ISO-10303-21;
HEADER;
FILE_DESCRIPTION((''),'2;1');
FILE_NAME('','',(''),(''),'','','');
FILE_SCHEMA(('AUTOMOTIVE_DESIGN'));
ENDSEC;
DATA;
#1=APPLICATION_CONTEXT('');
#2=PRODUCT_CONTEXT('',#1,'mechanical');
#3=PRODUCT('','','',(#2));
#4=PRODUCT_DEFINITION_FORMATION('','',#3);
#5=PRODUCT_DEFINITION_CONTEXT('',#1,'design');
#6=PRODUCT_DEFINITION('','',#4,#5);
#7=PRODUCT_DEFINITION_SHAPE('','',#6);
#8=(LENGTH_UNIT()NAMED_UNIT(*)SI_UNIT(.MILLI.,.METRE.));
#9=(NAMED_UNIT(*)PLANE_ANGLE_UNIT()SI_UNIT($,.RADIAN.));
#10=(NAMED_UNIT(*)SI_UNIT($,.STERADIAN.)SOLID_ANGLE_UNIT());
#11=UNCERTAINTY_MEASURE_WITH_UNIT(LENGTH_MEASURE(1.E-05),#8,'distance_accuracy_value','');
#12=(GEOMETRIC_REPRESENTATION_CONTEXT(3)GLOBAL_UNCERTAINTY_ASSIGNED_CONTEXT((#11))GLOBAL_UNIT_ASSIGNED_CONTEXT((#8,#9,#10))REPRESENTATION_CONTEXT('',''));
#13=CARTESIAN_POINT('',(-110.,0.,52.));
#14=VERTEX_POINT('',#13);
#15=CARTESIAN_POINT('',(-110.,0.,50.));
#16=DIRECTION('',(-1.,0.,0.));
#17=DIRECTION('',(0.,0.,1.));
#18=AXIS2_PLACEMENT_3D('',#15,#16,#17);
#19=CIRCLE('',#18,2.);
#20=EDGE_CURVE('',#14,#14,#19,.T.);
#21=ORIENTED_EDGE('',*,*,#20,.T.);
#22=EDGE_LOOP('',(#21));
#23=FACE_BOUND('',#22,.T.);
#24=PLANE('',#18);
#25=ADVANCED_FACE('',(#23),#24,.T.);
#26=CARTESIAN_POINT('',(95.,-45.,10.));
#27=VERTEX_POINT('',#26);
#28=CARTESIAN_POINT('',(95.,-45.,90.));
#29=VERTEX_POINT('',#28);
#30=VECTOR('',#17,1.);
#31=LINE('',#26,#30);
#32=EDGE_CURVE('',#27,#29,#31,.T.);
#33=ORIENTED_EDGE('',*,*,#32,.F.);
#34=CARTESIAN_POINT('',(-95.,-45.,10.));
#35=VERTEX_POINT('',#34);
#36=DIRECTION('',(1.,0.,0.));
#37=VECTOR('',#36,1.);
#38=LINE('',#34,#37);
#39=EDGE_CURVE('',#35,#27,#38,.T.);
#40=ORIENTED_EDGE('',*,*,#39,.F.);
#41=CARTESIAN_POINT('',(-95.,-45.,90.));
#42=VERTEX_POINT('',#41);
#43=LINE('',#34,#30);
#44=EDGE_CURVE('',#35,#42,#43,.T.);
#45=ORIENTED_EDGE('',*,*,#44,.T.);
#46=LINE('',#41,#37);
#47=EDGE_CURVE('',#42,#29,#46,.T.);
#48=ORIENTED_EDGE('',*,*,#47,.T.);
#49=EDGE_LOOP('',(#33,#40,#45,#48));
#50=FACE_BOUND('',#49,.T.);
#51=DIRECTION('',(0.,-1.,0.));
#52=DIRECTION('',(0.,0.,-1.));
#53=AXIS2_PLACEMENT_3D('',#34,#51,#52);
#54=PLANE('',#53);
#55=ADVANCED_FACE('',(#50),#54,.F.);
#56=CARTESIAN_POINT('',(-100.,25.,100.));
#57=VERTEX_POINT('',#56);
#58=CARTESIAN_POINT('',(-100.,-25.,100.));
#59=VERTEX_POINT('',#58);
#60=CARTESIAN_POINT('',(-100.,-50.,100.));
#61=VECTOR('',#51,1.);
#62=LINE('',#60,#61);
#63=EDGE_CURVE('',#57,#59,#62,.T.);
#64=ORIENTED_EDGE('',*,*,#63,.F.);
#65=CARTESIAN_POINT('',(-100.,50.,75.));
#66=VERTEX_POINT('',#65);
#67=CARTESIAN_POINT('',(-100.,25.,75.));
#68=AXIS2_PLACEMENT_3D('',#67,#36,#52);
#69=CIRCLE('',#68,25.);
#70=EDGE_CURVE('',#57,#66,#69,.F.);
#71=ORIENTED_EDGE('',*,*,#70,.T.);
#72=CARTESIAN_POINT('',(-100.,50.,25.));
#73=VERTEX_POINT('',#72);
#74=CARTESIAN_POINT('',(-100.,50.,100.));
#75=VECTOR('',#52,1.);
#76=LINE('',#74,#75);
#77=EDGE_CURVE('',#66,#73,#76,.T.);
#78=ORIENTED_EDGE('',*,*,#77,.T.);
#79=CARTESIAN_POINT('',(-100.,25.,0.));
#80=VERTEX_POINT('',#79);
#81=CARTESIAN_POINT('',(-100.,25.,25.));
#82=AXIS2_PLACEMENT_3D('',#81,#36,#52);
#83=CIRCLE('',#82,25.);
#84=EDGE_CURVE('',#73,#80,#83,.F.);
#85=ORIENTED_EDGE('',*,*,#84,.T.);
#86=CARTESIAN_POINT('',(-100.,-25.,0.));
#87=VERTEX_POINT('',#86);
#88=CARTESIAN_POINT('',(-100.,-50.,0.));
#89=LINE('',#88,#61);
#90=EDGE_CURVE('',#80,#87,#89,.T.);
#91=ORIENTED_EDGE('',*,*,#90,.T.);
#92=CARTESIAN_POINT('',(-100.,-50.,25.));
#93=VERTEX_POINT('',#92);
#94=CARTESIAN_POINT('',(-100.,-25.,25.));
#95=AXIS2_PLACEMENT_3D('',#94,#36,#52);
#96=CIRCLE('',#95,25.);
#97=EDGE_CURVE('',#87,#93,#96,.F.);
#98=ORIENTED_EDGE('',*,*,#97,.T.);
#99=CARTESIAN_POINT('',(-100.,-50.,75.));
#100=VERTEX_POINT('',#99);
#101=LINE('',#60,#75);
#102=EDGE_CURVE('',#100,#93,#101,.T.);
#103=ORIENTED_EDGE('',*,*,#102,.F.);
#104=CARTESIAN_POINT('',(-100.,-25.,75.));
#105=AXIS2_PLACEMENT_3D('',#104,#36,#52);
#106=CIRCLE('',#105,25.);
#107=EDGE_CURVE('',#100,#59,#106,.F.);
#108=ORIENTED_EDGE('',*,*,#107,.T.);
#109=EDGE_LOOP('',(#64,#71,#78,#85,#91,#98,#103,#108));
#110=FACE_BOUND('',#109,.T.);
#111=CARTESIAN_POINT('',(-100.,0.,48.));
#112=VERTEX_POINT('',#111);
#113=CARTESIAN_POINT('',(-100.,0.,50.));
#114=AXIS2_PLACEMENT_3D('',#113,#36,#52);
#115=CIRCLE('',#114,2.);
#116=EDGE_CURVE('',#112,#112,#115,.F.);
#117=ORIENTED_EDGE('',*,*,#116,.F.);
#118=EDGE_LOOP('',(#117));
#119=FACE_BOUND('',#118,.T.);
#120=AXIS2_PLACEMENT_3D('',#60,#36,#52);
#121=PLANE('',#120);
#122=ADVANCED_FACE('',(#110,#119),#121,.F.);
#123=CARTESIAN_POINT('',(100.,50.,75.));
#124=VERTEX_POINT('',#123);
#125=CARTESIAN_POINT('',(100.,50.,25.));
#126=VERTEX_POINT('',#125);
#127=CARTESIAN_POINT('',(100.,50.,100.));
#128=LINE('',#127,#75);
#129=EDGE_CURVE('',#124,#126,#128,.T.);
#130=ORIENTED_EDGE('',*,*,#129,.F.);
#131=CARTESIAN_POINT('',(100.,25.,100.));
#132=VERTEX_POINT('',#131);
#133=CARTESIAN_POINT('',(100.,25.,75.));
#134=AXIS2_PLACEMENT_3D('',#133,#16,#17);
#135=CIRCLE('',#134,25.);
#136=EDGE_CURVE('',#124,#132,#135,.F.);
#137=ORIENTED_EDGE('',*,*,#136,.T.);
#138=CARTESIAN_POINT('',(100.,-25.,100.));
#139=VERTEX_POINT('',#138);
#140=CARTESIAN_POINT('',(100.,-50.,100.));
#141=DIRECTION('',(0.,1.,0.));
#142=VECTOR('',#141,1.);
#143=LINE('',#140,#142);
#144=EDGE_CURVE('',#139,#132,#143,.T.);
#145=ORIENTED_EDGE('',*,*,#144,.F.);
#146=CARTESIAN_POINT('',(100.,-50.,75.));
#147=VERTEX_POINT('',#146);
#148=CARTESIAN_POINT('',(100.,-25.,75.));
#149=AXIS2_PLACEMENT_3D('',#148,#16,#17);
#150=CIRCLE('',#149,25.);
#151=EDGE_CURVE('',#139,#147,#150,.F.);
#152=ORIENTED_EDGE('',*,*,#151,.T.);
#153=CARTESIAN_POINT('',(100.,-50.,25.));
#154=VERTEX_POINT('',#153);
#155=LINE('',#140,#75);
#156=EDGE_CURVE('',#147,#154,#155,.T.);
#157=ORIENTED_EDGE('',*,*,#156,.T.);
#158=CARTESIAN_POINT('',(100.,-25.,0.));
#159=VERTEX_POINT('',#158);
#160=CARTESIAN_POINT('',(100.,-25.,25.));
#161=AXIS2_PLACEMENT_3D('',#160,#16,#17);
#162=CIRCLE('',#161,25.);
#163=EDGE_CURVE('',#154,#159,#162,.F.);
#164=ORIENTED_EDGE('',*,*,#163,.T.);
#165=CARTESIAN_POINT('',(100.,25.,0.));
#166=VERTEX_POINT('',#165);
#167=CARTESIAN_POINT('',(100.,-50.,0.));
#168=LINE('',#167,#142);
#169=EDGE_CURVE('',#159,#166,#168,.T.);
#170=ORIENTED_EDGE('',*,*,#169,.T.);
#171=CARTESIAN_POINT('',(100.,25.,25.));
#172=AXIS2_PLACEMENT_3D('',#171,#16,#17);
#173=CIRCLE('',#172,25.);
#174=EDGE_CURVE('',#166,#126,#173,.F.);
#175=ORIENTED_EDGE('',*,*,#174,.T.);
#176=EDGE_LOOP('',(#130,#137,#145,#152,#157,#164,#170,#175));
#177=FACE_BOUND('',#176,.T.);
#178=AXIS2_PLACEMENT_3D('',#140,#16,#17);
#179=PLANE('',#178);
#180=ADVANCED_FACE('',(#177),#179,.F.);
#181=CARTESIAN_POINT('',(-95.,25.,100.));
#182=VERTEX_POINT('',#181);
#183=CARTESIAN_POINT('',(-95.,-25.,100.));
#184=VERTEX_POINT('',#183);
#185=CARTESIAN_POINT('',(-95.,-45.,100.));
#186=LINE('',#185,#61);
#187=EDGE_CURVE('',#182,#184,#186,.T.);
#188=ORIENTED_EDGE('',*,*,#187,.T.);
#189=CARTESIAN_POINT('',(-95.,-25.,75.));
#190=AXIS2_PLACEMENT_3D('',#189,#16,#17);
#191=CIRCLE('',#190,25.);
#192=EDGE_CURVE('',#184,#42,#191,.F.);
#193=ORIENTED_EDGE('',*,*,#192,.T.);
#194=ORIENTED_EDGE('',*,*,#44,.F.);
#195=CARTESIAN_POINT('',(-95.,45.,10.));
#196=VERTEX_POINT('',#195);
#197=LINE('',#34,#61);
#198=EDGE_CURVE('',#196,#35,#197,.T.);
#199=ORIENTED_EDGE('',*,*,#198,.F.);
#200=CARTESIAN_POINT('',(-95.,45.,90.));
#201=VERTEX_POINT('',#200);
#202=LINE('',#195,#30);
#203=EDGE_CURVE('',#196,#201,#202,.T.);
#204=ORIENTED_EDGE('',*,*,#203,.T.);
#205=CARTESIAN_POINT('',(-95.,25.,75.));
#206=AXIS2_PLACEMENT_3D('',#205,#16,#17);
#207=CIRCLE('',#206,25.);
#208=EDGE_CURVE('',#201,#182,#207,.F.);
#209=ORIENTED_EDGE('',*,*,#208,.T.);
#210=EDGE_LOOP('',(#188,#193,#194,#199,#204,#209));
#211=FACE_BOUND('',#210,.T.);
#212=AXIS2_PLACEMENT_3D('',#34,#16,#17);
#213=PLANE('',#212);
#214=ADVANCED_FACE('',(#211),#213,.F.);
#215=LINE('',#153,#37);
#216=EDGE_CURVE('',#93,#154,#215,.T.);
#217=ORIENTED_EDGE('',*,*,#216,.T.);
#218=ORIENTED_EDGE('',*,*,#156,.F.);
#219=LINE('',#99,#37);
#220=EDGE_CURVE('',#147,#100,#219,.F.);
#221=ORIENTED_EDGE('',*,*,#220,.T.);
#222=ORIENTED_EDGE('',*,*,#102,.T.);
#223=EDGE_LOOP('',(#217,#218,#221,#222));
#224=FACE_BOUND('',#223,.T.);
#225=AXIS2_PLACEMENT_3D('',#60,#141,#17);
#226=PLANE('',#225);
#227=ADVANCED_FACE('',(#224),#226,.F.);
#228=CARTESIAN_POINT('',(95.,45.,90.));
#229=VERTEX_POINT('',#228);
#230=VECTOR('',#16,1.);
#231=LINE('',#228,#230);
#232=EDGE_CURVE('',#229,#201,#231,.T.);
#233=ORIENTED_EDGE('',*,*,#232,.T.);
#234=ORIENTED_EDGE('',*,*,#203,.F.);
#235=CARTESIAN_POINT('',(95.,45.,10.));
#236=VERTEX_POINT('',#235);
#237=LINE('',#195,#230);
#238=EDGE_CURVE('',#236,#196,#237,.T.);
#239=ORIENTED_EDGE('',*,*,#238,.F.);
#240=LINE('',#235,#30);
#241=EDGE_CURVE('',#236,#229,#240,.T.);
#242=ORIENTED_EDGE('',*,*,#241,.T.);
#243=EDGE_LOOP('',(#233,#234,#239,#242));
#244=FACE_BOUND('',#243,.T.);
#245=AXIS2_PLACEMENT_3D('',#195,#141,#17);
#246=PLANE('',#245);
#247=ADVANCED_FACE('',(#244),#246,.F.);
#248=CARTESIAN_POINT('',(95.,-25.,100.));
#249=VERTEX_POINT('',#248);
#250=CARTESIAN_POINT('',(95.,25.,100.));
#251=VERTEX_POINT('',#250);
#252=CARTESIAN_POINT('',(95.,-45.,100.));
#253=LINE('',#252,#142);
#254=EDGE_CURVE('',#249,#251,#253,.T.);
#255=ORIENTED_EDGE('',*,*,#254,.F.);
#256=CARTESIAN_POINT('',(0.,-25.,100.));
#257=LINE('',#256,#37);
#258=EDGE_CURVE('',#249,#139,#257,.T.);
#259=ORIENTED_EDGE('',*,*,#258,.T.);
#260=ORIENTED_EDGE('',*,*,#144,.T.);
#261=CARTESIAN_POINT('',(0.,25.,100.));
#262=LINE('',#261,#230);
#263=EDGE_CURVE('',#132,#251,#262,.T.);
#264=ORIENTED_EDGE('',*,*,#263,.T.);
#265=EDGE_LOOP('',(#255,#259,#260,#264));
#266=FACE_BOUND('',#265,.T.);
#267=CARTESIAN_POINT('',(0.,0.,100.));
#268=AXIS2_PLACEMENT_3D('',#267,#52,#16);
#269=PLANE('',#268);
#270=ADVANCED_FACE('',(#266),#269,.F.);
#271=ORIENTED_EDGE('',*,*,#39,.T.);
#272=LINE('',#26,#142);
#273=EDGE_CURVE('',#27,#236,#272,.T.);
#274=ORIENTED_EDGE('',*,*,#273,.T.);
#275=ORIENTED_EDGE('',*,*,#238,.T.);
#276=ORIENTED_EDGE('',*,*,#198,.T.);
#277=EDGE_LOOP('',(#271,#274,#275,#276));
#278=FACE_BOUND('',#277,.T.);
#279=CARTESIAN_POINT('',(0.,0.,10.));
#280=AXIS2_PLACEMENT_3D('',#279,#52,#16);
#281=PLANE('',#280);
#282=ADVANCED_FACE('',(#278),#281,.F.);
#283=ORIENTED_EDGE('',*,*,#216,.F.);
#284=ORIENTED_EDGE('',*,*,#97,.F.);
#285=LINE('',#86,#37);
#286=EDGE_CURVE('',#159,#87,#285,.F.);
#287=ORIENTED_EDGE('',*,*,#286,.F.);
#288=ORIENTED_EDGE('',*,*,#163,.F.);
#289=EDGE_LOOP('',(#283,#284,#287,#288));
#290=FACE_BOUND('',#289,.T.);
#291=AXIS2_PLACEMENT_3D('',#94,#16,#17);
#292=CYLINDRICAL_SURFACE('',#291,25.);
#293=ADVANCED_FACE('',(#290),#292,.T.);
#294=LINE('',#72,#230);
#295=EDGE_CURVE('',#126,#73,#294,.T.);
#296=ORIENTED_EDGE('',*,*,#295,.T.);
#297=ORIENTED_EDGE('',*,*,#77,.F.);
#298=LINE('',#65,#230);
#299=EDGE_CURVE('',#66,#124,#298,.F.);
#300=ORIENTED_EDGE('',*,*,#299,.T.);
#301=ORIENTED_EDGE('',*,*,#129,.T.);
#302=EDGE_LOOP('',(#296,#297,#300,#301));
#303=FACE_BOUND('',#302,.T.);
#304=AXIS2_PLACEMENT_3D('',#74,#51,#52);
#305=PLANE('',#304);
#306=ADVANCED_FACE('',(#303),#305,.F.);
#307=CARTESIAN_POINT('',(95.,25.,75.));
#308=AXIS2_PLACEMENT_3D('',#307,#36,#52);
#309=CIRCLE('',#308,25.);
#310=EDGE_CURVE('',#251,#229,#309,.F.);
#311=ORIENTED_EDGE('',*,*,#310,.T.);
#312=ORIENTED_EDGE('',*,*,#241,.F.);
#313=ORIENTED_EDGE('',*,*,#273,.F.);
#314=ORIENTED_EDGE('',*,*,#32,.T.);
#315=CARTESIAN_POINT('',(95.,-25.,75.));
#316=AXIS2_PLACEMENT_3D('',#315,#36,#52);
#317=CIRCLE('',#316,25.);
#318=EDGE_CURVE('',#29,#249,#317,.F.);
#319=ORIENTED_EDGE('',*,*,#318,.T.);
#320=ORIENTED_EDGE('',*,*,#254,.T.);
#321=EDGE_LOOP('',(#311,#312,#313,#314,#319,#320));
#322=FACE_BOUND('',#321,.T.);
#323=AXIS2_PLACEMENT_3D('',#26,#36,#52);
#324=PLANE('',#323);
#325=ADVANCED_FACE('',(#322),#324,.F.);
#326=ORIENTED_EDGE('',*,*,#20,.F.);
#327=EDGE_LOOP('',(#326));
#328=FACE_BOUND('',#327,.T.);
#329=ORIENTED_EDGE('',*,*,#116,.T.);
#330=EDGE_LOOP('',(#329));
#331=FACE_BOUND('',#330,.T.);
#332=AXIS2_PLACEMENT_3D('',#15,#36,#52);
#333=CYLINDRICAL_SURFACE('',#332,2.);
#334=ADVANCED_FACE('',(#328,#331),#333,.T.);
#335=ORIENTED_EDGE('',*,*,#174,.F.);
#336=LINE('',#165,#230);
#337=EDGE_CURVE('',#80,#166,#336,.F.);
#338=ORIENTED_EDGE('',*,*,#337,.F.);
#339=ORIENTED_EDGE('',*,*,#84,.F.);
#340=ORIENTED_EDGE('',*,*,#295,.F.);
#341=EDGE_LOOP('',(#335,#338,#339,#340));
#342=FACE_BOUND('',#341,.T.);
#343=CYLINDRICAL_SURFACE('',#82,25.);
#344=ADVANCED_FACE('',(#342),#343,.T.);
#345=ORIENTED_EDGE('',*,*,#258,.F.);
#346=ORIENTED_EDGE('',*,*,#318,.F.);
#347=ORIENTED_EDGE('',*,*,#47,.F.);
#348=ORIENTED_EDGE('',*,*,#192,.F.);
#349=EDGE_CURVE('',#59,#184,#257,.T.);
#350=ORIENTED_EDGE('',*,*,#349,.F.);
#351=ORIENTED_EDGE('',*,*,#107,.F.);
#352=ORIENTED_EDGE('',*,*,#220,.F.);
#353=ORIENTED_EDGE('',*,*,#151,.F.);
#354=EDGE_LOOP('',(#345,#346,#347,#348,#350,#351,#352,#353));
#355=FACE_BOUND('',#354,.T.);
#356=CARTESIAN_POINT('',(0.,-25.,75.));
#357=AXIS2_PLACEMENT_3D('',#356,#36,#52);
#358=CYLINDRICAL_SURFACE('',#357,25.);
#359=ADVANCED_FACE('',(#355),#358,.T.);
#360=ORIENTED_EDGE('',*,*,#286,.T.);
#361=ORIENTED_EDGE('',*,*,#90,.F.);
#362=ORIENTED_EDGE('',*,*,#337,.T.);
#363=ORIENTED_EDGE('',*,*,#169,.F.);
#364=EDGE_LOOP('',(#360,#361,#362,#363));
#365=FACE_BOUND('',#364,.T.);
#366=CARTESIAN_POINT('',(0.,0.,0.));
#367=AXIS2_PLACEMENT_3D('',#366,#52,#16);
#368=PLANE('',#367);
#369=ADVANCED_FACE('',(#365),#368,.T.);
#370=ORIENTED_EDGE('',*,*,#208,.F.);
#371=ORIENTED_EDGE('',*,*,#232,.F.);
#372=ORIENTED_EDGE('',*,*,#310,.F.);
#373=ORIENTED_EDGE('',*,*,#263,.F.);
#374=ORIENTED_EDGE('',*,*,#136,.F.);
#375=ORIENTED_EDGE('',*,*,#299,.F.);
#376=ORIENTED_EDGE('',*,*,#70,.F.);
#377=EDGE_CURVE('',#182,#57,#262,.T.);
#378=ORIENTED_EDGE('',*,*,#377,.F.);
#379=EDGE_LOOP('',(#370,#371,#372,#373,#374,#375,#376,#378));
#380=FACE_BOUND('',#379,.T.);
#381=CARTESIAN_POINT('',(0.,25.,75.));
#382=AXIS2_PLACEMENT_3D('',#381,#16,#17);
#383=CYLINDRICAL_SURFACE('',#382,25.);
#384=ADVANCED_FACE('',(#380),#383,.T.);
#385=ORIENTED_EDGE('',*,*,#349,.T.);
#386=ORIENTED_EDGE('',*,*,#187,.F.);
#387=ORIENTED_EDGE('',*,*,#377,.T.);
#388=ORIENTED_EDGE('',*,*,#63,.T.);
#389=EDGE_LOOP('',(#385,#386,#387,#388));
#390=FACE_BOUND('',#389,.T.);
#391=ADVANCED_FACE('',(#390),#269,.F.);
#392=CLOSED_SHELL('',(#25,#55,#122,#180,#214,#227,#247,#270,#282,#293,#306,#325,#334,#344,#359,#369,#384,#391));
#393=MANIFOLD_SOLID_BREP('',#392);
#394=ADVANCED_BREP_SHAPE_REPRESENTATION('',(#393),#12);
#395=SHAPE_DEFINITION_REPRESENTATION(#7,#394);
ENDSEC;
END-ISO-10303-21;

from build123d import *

# Parameters (mm, degrees)
SKETCH_2_W          = 200
SKETCH_2_H          = 100
EXTRUDE_1_DEPTH     = 100
SKETCH_3_W          = 190
SKETCH_3_H          = 90
CUT_EXTRUDE_1_DEPTH = 90
FILLET_1_R          = 25
SKETCH_4_R          = 2
EXTRUDE_2_DEPTH     = 10


with BuildPart() as part:
    # 草图2 → 凸台-拉伸1 (new body)
    with BuildSketch(Plane.XY):
        Rectangle(SKETCH_2_W, SKETCH_2_H)
    extrude(amount=EXTRUDE_1_DEPTH)

    # 草图3 → 切除-拉伸1 (cut)
    with BuildSketch(Plane.XY.offset(100)):
        Rectangle(SKETCH_3_W, SKETCH_3_H)
    extrude(amount=-CUT_EXTRUDE_1_DEPTH, mode=Mode.SUBTRACT)

    # 圆角1
    # the kernel refuses this fillet: 25 mm, written as the material it takes off along each edge
    with BuildSketch(Plane(origin=(162.5, 50, 0), x_dir=(0, -1, 0), z_dir=(-1, 0, 0)), Plane(origin=(-162.5, -50, 100), x_dir=(0, 0, -1), z_dir=(1, 0, 0))) as fillet_1_piece_1:
        with BuildLine():
            CenterArc((FILLET_1_R, FILLET_1_R), FILLET_1_R, 180, 90)
            Line((0, FILLET_1_R), (0, 0))
            Line((0, 0), (FILLET_1_R, 0))
        make_face()
    extrude(amount=325, mode=Mode.SUBTRACT)
    with BuildSketch(Plane(origin=(-162.5, -50, 0), x_dir=(0, 0, 1), z_dir=(1, 0, 0)), Plane(origin=(162.5, 50, 100), x_dir=(0, -1, 0), z_dir=(-1, 0, 0))) as fillet_1_piece_2:
        with BuildLine():
            CenterArc((FILLET_1_R, -FILLET_1_R), FILLET_1_R, 90, 90)
            Line((0, -FILLET_1_R), (0, 0))
            Line((0, 0), (FILLET_1_R, 0))
        make_face()
    extrude(amount=325, mode=Mode.SUBTRACT)

    # 草图4 → 凸台-拉伸2 (add)
    with BuildSketch(Plane.ZY.offset(100)):
        with Locations(Location((50, 0, 0), (0, 0, 180))):
            Circle(SKETCH_4_R)
    extrude(amount=EXTRUDE_2_DEPTH)


solid = part.part
